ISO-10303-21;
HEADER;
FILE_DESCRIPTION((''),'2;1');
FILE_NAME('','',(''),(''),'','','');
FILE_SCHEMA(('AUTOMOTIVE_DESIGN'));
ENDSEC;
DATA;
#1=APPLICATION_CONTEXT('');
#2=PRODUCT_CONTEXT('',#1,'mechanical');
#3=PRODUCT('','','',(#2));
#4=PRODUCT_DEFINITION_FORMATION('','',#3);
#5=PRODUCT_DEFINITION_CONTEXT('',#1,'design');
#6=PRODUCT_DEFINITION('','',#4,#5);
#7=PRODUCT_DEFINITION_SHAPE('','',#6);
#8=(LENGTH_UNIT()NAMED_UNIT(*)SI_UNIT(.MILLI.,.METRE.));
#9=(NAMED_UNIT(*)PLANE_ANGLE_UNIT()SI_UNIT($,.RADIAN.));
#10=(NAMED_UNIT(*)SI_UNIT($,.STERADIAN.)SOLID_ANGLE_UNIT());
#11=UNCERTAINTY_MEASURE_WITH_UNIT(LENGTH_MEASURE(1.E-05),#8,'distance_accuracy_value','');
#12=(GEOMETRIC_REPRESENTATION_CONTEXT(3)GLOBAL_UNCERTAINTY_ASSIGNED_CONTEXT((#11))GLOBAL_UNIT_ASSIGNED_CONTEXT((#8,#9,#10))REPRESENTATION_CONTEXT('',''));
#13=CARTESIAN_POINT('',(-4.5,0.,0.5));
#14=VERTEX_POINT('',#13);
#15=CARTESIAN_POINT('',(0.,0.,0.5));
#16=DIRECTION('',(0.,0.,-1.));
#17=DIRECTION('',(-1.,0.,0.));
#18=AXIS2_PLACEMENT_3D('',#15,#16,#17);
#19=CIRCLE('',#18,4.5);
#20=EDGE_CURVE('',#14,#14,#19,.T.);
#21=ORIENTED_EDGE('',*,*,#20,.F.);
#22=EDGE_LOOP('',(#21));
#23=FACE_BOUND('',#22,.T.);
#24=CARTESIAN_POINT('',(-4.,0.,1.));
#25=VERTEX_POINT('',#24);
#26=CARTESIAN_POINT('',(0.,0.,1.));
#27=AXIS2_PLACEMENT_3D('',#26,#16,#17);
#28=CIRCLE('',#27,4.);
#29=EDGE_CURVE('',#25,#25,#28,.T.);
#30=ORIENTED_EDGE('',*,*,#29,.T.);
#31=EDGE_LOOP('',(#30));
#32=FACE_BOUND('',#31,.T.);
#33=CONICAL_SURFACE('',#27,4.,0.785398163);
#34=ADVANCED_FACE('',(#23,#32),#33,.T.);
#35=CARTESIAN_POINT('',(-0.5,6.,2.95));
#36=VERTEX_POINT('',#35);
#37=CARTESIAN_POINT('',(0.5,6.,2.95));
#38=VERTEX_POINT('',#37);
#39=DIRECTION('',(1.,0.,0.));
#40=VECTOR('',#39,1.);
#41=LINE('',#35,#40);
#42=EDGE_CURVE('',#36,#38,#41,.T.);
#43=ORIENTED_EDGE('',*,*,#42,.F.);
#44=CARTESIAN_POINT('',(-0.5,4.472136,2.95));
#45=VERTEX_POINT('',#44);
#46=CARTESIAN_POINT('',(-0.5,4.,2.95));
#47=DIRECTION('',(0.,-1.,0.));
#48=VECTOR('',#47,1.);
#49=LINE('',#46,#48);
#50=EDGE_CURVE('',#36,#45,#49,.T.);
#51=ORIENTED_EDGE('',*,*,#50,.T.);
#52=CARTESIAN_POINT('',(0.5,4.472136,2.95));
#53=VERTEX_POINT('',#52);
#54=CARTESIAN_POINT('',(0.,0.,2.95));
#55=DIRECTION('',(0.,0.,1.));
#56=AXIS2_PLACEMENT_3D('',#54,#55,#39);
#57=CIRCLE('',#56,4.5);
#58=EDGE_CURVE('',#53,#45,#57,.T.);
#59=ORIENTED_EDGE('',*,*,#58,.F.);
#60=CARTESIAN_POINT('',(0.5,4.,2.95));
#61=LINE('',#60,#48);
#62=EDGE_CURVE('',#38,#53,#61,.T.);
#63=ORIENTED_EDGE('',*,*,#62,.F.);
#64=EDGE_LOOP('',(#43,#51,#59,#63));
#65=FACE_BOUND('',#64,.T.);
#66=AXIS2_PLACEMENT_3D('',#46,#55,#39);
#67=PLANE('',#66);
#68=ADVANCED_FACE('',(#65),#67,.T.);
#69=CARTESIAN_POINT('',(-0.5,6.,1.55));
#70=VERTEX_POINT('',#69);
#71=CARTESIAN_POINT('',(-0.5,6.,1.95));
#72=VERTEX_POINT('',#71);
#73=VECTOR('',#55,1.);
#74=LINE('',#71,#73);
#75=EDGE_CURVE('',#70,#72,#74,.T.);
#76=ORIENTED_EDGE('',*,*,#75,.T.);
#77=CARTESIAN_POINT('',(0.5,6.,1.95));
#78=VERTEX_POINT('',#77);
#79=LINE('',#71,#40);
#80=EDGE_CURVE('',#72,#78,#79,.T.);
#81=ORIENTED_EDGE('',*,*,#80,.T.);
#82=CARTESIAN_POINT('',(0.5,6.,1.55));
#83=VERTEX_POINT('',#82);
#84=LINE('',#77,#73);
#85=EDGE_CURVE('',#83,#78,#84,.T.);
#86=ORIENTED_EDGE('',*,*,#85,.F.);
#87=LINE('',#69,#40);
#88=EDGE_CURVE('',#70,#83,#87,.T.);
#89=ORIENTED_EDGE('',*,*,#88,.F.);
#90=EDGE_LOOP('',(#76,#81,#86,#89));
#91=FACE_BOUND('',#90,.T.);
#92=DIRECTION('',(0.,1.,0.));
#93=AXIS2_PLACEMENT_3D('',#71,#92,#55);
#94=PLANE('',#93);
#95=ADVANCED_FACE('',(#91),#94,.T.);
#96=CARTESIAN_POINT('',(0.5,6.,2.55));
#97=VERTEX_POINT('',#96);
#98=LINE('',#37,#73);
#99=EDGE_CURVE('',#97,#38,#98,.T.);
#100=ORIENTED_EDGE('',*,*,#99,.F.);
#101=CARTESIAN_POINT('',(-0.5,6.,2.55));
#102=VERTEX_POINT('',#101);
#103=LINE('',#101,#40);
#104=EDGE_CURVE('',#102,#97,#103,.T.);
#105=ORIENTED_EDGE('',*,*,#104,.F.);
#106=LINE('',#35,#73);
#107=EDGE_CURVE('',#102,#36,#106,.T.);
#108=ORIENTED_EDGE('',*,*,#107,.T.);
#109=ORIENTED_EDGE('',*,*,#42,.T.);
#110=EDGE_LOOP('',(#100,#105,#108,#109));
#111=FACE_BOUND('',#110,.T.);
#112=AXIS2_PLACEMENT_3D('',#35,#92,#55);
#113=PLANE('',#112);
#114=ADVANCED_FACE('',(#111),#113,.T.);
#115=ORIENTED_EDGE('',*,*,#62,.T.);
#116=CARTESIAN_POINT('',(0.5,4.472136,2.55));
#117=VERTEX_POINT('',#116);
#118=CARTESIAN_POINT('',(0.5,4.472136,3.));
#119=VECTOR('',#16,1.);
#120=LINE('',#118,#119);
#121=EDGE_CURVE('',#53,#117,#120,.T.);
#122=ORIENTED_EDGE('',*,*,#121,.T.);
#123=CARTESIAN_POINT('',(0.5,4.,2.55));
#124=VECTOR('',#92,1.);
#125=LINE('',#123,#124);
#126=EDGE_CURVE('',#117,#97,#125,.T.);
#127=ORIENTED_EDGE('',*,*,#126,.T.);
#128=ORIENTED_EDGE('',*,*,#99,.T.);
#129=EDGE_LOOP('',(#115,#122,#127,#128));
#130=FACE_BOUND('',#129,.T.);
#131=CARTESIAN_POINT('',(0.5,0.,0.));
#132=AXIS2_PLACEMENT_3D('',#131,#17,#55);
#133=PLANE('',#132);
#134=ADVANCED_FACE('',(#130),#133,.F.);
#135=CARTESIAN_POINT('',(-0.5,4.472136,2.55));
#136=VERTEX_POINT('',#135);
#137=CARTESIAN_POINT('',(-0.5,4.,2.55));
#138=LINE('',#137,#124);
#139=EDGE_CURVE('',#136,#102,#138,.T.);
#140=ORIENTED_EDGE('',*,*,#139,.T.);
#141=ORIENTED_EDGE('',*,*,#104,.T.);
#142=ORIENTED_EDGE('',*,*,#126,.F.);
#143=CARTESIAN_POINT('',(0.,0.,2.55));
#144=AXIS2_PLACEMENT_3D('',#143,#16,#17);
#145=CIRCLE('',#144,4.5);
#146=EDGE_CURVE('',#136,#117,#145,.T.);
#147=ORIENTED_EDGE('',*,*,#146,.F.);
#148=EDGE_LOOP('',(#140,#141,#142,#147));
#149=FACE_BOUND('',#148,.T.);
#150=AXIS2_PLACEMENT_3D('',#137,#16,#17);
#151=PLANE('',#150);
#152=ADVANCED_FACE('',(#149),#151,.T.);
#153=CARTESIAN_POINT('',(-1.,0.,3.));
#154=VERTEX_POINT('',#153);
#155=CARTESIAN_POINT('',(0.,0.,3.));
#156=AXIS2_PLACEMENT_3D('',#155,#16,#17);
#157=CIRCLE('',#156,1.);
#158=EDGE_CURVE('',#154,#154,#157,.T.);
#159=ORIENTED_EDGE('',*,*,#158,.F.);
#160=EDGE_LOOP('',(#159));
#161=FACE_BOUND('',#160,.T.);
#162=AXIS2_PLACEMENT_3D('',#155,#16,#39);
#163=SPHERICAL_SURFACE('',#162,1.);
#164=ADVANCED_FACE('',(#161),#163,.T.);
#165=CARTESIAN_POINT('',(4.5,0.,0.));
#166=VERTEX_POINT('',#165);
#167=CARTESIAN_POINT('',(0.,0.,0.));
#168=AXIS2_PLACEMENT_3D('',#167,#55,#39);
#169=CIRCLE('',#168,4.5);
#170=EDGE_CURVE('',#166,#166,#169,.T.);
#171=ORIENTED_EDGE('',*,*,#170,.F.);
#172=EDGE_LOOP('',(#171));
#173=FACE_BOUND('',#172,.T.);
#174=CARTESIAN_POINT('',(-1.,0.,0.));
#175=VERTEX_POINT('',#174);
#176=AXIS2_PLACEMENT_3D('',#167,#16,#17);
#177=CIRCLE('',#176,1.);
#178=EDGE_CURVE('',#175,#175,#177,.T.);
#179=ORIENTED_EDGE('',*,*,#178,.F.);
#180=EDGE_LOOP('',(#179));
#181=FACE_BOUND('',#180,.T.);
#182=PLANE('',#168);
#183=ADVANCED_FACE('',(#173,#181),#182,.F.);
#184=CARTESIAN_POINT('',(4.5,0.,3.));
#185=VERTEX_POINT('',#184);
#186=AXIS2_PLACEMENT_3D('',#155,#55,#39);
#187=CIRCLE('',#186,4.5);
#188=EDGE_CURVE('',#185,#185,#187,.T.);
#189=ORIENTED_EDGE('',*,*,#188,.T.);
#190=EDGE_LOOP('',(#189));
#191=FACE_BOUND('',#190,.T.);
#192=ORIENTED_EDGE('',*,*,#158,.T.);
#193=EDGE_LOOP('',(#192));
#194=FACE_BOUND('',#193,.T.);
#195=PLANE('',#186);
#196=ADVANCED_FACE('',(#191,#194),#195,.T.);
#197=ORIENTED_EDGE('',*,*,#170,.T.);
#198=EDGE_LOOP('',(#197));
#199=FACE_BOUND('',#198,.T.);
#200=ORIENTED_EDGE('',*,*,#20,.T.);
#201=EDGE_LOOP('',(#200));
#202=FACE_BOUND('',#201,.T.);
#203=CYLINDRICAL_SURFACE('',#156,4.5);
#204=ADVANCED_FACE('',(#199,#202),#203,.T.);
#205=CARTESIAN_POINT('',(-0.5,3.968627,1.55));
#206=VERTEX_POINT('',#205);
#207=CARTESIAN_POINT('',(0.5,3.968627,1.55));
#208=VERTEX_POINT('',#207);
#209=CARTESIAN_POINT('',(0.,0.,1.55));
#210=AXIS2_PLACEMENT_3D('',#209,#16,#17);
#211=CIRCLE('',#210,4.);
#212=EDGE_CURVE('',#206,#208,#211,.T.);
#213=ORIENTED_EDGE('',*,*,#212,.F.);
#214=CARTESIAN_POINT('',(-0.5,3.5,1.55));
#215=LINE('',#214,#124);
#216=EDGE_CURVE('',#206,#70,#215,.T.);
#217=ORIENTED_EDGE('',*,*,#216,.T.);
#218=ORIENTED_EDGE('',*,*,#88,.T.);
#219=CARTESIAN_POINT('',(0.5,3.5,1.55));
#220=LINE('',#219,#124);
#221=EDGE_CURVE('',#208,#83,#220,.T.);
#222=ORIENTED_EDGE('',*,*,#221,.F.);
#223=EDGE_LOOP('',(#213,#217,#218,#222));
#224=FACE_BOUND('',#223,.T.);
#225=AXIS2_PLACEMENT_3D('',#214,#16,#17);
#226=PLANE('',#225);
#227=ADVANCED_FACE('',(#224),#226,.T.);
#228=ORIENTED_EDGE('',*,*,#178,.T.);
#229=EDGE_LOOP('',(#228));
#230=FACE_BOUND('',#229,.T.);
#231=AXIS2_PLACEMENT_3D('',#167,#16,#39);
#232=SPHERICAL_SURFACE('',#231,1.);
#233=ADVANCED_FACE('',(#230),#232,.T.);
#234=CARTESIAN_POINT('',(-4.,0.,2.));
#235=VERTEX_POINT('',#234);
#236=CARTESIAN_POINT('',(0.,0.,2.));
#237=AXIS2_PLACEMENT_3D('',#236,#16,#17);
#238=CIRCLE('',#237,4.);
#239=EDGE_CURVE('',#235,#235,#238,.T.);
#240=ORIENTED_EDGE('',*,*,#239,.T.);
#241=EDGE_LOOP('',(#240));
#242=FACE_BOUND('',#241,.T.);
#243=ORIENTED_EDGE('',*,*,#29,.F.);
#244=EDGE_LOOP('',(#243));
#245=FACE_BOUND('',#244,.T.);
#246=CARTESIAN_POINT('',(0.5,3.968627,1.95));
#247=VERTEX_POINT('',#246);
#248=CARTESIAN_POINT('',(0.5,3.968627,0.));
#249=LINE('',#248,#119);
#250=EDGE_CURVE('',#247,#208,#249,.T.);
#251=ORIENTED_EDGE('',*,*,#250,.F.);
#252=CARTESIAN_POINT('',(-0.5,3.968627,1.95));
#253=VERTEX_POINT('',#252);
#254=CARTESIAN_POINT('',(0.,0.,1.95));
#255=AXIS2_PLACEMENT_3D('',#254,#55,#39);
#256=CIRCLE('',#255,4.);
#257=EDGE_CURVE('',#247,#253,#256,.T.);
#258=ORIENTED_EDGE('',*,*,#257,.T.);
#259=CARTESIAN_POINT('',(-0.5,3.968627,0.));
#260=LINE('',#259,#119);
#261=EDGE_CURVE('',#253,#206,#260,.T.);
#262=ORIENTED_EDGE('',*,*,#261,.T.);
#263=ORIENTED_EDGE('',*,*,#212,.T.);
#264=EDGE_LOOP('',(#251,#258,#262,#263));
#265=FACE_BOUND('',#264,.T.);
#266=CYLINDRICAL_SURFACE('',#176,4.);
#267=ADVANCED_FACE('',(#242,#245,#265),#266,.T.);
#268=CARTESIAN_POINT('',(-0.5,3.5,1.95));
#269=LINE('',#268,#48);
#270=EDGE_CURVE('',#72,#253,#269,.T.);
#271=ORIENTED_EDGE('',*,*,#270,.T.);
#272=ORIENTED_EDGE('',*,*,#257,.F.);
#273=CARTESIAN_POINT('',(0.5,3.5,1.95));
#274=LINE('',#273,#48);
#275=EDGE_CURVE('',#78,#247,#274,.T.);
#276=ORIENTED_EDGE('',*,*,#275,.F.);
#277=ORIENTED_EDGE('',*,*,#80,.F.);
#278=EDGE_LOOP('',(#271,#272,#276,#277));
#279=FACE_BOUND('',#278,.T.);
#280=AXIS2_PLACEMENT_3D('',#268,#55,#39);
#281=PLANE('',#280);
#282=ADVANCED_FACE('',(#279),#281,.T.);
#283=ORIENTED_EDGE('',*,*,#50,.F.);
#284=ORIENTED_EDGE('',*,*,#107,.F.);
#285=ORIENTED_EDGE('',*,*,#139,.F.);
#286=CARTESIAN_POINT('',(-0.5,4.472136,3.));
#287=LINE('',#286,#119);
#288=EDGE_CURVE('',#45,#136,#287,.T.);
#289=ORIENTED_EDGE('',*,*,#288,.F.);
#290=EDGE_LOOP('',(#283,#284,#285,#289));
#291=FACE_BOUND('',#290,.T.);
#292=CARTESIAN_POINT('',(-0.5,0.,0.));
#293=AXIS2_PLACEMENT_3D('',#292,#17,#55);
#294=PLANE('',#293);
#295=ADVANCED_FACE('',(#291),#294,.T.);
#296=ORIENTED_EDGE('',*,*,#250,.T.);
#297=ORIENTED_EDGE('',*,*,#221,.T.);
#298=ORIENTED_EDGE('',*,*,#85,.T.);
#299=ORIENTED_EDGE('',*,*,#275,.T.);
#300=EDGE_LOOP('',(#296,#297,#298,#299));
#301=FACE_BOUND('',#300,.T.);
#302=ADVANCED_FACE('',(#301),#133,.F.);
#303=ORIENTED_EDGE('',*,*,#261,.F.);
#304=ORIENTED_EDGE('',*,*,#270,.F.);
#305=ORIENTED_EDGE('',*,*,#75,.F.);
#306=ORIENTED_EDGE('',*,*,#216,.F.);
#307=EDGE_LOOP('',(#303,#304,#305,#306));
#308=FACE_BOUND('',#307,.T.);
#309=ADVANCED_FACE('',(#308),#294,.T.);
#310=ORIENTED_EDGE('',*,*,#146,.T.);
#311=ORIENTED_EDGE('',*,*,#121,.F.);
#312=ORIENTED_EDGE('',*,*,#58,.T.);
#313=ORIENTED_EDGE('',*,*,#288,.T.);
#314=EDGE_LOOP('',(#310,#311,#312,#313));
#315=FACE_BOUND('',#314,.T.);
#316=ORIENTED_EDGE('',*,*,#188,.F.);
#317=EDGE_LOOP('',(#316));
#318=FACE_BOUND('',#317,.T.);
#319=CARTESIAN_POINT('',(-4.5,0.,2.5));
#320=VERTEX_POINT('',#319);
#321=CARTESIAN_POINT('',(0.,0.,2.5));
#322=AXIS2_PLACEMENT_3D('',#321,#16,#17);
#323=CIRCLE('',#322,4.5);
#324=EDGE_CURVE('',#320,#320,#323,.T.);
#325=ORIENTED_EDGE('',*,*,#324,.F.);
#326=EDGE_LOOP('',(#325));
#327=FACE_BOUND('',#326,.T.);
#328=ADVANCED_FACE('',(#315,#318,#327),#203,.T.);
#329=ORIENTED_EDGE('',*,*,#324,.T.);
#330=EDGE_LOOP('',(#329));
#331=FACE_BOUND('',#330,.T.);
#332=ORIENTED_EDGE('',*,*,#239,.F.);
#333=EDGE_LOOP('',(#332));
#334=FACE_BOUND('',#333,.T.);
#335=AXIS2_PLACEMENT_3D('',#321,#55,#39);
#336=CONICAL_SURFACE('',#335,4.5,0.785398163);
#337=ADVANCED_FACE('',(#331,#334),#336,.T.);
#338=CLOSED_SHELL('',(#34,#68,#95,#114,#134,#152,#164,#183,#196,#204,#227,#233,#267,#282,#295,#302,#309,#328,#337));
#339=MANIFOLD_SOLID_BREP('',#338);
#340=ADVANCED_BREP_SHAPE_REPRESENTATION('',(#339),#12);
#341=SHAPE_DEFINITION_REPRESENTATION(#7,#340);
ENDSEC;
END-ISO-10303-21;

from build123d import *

# Parameters (mm, degrees)
SKETCH1_R                = 4.5
MAIN_BASE_DEPTH          = 3
BOSS_EXTRUDE1_DEPTH      = 0.5
BOSS_EXTRUDE1_DEPTH_BACK = 0.5
SKETCH5_W                = 0.4
SKETCH5_H                = 2
SKETCH5_H_2              = 2.5


with BuildPart() as part:
    # Sketch1 → main_base (new body)
    with BuildSketch(Plane.XY):
        Circle(SKETCH1_R)
    extrude(amount=MAIN_BASE_DEPTH)

    # Sketch2 → pulley_cut_out (revolve, cut)
    with BuildSketch(Plane(origin=(0, 0, 0), x_dir=(0, 0, -1), z_dir=(1, 0, 0))):
        Polygon((-2.5, 4.5), (-0.5, 4.5), (-1, 4), (-2, 4), align=None)
    revolve(axis=Axis((0, 0, 0), (0, 0, 1)), mode=Mode.SUBTRACT)

    # Sketch4 → rotating_point (revolve)
    with BuildSketch(Plane(origin=(0, 0, 0), x_dir=(1, 0, 0), z_dir=(0, 1, 0))):
        with BuildLine():
            ThreePointArc((0, 1), (-0.707106781, 0.707106781), (-1, 0))
            Line((-1, 0), (0, 0))
            Line((0, 0), (0, 1))
        make_face()
        with BuildLine():
            Line((0, -4), (0, -3))
            Line((0, -3), (-1, -3))
            ThreePointArc((-1, -3), (-0.707106781, -3.707106781), (0, -4))
        make_face()
    revolve(axis=Axis((0, 0, -1), (0, 0, 1)))

    # Sketch5 → Boss-Extrude1 (add, two sides: drawn at the far end of the back side and taken through both)
    with BuildSketch(Plane(origin=(0, 0, 0), x_dir=(0, 0, -1), z_dir=(1, 0, 0)).offset(-BOSS_EXTRUDE1_DEPTH_BACK)):
        with Locations((-2.75, 5)):
            Rectangle(SKETCH5_W, SKETCH5_H)
        with Locations((-1.75, 4.75)):
            Rectangle(SKETCH5_W, SKETCH5_H_2)
    extrude(amount=BOSS_EXTRUDE1_DEPTH + BOSS_EXTRUDE1_DEPTH_BACK)


solid = part.part
